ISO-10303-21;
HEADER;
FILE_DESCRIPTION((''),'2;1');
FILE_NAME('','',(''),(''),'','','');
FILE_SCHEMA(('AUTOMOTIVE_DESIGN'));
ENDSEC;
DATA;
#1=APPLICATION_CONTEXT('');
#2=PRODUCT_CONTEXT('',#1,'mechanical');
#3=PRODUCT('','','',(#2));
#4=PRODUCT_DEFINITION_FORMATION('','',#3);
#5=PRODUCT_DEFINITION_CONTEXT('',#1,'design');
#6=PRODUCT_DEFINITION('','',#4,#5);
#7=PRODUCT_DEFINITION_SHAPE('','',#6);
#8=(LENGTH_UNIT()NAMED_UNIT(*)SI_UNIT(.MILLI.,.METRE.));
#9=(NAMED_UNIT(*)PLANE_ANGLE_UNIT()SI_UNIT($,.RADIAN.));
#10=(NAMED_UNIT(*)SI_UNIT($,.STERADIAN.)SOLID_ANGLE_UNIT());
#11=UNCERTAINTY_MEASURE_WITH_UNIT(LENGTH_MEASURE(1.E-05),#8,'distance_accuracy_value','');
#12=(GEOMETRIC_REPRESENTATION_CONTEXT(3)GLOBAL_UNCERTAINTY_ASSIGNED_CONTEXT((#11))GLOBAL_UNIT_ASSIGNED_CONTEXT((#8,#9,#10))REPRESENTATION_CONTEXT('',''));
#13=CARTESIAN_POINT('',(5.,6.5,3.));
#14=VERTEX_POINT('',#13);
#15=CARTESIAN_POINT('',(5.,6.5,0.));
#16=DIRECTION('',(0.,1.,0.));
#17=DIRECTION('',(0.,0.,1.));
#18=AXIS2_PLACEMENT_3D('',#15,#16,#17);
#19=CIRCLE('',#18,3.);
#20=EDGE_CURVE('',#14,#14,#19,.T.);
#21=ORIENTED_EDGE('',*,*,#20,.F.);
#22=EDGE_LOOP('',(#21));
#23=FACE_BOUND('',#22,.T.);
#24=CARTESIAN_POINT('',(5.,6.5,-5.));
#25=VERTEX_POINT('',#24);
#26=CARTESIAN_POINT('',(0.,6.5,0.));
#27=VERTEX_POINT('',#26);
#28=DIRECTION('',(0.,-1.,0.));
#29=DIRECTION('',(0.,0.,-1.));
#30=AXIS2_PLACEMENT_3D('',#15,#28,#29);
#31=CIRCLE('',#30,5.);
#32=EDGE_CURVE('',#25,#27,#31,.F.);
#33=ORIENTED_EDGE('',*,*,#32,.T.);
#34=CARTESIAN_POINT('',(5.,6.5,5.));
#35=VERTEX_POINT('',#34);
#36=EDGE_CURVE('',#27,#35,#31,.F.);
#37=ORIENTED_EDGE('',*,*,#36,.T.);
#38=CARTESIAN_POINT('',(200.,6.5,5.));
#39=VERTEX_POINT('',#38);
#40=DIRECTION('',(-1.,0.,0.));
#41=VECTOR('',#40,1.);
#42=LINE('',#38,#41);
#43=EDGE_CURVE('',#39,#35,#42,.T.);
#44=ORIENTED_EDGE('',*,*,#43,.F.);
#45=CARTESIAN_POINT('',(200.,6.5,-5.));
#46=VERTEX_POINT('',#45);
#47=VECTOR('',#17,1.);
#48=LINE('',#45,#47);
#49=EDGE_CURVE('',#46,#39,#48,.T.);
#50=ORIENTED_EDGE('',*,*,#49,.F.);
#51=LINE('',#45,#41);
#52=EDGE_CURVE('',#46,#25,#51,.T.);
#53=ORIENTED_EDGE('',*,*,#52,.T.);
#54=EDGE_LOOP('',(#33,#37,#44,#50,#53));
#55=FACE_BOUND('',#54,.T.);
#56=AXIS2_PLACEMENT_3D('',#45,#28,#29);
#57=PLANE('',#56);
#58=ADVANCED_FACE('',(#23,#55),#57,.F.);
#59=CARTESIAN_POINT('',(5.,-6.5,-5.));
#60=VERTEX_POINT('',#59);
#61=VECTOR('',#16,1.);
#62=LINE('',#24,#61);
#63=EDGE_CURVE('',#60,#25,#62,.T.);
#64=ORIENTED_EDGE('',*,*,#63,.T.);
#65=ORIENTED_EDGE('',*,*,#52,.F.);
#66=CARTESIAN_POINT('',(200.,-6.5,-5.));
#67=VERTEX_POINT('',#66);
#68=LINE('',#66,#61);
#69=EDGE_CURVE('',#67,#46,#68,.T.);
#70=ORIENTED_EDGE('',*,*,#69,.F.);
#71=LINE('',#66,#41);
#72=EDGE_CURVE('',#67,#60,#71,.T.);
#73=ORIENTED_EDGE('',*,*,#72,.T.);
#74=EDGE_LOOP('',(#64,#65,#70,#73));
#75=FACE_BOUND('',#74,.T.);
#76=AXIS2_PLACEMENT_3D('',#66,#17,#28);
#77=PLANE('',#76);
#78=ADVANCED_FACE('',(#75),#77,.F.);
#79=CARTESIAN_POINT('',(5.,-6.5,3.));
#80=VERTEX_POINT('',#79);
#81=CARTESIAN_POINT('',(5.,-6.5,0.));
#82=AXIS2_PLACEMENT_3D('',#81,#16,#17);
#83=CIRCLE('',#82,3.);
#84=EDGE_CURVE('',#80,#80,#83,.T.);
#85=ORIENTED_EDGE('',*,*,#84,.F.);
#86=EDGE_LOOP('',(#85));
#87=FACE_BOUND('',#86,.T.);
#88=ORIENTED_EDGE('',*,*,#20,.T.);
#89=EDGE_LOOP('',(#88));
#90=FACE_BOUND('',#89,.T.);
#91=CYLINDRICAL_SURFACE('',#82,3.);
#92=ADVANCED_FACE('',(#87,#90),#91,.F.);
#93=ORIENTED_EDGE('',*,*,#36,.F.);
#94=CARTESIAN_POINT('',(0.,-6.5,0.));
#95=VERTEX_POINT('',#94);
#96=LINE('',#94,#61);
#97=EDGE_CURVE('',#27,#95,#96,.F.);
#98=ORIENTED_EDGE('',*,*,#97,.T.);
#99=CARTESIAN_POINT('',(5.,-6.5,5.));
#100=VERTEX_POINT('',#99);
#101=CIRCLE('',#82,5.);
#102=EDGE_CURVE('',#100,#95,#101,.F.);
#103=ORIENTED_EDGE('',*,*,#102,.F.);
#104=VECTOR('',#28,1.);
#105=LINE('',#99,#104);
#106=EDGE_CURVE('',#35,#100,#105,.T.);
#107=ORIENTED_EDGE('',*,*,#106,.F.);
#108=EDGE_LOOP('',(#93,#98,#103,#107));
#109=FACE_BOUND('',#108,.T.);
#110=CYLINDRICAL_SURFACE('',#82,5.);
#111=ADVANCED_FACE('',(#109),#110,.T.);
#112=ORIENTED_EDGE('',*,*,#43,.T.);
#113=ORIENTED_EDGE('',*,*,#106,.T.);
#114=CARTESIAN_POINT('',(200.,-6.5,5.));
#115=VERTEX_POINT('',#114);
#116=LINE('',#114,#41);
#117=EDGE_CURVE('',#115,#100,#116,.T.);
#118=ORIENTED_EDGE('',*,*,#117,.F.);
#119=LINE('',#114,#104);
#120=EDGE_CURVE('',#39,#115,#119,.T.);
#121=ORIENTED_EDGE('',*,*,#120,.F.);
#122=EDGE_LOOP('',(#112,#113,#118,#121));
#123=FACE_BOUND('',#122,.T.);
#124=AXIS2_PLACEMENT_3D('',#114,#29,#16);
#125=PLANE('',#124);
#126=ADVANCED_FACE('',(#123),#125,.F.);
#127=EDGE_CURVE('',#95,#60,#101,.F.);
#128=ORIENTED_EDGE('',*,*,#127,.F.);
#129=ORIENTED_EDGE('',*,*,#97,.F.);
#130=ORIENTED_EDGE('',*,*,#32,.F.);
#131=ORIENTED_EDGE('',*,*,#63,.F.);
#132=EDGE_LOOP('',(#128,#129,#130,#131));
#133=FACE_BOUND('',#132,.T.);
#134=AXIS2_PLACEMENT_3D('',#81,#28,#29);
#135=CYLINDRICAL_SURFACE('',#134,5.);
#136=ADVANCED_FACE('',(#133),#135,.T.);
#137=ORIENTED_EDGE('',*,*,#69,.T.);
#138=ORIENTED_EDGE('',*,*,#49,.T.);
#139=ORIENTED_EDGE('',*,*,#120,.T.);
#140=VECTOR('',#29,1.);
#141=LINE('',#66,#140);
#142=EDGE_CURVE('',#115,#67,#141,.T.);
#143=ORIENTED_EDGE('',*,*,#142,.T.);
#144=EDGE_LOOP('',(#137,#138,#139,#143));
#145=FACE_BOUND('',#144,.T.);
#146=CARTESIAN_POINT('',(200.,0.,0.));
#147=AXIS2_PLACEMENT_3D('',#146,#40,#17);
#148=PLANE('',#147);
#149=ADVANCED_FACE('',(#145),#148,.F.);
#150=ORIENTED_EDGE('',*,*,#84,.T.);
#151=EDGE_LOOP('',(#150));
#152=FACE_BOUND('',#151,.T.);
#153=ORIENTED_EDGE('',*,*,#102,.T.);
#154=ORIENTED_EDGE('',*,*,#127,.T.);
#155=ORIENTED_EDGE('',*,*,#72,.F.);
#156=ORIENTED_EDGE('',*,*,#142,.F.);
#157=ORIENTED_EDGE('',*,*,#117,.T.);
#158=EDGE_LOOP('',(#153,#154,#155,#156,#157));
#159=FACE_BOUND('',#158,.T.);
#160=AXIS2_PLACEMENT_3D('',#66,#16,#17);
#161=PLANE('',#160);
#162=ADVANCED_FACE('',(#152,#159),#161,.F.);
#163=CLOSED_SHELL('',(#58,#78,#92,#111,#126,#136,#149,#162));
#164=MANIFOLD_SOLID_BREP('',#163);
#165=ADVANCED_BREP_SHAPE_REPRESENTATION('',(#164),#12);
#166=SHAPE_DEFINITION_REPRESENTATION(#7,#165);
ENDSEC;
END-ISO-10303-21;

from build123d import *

# Parameters (mm, degrees)
SKETCH1_W           = 13
SKETCH1_H           = 10
BOSS_EXTRUDE1_DEPTH = 200
SKETCH2_R           = 3
CUT_EXTRUDE1_DEPTH  = 201.484413359
FILLET1_R           = 5


with BuildPart() as part:
    # Sketch1 → Boss-Extrude1 (new body)
    with BuildSketch(Plane.YZ):
        Rectangle(SKETCH1_W, SKETCH1_H)
    extrude(amount=BOSS_EXTRUDE1_DEPTH)

    # Sketch2 → Cut-Extrude1 (cut, through all)
    with BuildSketch(Plane(origin=(0, 6.5, 0), x_dir=(-1, 0, 0), z_dir=(0, 1, 0))):
        with Locations(Location((-5, 0, 0), (0, 0, 90))):
            Circle(SKETCH2_R)
    extrude(amount=-CUT_EXTRUDE1_DEPTH, mode=Mode.SUBTRACT)

    # Fillet1
    fillet1_edges = [part.edges().sort_by_distance(p)[0] for p in [
        (0, 0, 5),
        (0, 0, -5),
    ]]
    fillet(fillet1_edges, radius=FILLET1_R - 0.0001)  # a hair under: the kernel refuses the full size


solid = part.part
